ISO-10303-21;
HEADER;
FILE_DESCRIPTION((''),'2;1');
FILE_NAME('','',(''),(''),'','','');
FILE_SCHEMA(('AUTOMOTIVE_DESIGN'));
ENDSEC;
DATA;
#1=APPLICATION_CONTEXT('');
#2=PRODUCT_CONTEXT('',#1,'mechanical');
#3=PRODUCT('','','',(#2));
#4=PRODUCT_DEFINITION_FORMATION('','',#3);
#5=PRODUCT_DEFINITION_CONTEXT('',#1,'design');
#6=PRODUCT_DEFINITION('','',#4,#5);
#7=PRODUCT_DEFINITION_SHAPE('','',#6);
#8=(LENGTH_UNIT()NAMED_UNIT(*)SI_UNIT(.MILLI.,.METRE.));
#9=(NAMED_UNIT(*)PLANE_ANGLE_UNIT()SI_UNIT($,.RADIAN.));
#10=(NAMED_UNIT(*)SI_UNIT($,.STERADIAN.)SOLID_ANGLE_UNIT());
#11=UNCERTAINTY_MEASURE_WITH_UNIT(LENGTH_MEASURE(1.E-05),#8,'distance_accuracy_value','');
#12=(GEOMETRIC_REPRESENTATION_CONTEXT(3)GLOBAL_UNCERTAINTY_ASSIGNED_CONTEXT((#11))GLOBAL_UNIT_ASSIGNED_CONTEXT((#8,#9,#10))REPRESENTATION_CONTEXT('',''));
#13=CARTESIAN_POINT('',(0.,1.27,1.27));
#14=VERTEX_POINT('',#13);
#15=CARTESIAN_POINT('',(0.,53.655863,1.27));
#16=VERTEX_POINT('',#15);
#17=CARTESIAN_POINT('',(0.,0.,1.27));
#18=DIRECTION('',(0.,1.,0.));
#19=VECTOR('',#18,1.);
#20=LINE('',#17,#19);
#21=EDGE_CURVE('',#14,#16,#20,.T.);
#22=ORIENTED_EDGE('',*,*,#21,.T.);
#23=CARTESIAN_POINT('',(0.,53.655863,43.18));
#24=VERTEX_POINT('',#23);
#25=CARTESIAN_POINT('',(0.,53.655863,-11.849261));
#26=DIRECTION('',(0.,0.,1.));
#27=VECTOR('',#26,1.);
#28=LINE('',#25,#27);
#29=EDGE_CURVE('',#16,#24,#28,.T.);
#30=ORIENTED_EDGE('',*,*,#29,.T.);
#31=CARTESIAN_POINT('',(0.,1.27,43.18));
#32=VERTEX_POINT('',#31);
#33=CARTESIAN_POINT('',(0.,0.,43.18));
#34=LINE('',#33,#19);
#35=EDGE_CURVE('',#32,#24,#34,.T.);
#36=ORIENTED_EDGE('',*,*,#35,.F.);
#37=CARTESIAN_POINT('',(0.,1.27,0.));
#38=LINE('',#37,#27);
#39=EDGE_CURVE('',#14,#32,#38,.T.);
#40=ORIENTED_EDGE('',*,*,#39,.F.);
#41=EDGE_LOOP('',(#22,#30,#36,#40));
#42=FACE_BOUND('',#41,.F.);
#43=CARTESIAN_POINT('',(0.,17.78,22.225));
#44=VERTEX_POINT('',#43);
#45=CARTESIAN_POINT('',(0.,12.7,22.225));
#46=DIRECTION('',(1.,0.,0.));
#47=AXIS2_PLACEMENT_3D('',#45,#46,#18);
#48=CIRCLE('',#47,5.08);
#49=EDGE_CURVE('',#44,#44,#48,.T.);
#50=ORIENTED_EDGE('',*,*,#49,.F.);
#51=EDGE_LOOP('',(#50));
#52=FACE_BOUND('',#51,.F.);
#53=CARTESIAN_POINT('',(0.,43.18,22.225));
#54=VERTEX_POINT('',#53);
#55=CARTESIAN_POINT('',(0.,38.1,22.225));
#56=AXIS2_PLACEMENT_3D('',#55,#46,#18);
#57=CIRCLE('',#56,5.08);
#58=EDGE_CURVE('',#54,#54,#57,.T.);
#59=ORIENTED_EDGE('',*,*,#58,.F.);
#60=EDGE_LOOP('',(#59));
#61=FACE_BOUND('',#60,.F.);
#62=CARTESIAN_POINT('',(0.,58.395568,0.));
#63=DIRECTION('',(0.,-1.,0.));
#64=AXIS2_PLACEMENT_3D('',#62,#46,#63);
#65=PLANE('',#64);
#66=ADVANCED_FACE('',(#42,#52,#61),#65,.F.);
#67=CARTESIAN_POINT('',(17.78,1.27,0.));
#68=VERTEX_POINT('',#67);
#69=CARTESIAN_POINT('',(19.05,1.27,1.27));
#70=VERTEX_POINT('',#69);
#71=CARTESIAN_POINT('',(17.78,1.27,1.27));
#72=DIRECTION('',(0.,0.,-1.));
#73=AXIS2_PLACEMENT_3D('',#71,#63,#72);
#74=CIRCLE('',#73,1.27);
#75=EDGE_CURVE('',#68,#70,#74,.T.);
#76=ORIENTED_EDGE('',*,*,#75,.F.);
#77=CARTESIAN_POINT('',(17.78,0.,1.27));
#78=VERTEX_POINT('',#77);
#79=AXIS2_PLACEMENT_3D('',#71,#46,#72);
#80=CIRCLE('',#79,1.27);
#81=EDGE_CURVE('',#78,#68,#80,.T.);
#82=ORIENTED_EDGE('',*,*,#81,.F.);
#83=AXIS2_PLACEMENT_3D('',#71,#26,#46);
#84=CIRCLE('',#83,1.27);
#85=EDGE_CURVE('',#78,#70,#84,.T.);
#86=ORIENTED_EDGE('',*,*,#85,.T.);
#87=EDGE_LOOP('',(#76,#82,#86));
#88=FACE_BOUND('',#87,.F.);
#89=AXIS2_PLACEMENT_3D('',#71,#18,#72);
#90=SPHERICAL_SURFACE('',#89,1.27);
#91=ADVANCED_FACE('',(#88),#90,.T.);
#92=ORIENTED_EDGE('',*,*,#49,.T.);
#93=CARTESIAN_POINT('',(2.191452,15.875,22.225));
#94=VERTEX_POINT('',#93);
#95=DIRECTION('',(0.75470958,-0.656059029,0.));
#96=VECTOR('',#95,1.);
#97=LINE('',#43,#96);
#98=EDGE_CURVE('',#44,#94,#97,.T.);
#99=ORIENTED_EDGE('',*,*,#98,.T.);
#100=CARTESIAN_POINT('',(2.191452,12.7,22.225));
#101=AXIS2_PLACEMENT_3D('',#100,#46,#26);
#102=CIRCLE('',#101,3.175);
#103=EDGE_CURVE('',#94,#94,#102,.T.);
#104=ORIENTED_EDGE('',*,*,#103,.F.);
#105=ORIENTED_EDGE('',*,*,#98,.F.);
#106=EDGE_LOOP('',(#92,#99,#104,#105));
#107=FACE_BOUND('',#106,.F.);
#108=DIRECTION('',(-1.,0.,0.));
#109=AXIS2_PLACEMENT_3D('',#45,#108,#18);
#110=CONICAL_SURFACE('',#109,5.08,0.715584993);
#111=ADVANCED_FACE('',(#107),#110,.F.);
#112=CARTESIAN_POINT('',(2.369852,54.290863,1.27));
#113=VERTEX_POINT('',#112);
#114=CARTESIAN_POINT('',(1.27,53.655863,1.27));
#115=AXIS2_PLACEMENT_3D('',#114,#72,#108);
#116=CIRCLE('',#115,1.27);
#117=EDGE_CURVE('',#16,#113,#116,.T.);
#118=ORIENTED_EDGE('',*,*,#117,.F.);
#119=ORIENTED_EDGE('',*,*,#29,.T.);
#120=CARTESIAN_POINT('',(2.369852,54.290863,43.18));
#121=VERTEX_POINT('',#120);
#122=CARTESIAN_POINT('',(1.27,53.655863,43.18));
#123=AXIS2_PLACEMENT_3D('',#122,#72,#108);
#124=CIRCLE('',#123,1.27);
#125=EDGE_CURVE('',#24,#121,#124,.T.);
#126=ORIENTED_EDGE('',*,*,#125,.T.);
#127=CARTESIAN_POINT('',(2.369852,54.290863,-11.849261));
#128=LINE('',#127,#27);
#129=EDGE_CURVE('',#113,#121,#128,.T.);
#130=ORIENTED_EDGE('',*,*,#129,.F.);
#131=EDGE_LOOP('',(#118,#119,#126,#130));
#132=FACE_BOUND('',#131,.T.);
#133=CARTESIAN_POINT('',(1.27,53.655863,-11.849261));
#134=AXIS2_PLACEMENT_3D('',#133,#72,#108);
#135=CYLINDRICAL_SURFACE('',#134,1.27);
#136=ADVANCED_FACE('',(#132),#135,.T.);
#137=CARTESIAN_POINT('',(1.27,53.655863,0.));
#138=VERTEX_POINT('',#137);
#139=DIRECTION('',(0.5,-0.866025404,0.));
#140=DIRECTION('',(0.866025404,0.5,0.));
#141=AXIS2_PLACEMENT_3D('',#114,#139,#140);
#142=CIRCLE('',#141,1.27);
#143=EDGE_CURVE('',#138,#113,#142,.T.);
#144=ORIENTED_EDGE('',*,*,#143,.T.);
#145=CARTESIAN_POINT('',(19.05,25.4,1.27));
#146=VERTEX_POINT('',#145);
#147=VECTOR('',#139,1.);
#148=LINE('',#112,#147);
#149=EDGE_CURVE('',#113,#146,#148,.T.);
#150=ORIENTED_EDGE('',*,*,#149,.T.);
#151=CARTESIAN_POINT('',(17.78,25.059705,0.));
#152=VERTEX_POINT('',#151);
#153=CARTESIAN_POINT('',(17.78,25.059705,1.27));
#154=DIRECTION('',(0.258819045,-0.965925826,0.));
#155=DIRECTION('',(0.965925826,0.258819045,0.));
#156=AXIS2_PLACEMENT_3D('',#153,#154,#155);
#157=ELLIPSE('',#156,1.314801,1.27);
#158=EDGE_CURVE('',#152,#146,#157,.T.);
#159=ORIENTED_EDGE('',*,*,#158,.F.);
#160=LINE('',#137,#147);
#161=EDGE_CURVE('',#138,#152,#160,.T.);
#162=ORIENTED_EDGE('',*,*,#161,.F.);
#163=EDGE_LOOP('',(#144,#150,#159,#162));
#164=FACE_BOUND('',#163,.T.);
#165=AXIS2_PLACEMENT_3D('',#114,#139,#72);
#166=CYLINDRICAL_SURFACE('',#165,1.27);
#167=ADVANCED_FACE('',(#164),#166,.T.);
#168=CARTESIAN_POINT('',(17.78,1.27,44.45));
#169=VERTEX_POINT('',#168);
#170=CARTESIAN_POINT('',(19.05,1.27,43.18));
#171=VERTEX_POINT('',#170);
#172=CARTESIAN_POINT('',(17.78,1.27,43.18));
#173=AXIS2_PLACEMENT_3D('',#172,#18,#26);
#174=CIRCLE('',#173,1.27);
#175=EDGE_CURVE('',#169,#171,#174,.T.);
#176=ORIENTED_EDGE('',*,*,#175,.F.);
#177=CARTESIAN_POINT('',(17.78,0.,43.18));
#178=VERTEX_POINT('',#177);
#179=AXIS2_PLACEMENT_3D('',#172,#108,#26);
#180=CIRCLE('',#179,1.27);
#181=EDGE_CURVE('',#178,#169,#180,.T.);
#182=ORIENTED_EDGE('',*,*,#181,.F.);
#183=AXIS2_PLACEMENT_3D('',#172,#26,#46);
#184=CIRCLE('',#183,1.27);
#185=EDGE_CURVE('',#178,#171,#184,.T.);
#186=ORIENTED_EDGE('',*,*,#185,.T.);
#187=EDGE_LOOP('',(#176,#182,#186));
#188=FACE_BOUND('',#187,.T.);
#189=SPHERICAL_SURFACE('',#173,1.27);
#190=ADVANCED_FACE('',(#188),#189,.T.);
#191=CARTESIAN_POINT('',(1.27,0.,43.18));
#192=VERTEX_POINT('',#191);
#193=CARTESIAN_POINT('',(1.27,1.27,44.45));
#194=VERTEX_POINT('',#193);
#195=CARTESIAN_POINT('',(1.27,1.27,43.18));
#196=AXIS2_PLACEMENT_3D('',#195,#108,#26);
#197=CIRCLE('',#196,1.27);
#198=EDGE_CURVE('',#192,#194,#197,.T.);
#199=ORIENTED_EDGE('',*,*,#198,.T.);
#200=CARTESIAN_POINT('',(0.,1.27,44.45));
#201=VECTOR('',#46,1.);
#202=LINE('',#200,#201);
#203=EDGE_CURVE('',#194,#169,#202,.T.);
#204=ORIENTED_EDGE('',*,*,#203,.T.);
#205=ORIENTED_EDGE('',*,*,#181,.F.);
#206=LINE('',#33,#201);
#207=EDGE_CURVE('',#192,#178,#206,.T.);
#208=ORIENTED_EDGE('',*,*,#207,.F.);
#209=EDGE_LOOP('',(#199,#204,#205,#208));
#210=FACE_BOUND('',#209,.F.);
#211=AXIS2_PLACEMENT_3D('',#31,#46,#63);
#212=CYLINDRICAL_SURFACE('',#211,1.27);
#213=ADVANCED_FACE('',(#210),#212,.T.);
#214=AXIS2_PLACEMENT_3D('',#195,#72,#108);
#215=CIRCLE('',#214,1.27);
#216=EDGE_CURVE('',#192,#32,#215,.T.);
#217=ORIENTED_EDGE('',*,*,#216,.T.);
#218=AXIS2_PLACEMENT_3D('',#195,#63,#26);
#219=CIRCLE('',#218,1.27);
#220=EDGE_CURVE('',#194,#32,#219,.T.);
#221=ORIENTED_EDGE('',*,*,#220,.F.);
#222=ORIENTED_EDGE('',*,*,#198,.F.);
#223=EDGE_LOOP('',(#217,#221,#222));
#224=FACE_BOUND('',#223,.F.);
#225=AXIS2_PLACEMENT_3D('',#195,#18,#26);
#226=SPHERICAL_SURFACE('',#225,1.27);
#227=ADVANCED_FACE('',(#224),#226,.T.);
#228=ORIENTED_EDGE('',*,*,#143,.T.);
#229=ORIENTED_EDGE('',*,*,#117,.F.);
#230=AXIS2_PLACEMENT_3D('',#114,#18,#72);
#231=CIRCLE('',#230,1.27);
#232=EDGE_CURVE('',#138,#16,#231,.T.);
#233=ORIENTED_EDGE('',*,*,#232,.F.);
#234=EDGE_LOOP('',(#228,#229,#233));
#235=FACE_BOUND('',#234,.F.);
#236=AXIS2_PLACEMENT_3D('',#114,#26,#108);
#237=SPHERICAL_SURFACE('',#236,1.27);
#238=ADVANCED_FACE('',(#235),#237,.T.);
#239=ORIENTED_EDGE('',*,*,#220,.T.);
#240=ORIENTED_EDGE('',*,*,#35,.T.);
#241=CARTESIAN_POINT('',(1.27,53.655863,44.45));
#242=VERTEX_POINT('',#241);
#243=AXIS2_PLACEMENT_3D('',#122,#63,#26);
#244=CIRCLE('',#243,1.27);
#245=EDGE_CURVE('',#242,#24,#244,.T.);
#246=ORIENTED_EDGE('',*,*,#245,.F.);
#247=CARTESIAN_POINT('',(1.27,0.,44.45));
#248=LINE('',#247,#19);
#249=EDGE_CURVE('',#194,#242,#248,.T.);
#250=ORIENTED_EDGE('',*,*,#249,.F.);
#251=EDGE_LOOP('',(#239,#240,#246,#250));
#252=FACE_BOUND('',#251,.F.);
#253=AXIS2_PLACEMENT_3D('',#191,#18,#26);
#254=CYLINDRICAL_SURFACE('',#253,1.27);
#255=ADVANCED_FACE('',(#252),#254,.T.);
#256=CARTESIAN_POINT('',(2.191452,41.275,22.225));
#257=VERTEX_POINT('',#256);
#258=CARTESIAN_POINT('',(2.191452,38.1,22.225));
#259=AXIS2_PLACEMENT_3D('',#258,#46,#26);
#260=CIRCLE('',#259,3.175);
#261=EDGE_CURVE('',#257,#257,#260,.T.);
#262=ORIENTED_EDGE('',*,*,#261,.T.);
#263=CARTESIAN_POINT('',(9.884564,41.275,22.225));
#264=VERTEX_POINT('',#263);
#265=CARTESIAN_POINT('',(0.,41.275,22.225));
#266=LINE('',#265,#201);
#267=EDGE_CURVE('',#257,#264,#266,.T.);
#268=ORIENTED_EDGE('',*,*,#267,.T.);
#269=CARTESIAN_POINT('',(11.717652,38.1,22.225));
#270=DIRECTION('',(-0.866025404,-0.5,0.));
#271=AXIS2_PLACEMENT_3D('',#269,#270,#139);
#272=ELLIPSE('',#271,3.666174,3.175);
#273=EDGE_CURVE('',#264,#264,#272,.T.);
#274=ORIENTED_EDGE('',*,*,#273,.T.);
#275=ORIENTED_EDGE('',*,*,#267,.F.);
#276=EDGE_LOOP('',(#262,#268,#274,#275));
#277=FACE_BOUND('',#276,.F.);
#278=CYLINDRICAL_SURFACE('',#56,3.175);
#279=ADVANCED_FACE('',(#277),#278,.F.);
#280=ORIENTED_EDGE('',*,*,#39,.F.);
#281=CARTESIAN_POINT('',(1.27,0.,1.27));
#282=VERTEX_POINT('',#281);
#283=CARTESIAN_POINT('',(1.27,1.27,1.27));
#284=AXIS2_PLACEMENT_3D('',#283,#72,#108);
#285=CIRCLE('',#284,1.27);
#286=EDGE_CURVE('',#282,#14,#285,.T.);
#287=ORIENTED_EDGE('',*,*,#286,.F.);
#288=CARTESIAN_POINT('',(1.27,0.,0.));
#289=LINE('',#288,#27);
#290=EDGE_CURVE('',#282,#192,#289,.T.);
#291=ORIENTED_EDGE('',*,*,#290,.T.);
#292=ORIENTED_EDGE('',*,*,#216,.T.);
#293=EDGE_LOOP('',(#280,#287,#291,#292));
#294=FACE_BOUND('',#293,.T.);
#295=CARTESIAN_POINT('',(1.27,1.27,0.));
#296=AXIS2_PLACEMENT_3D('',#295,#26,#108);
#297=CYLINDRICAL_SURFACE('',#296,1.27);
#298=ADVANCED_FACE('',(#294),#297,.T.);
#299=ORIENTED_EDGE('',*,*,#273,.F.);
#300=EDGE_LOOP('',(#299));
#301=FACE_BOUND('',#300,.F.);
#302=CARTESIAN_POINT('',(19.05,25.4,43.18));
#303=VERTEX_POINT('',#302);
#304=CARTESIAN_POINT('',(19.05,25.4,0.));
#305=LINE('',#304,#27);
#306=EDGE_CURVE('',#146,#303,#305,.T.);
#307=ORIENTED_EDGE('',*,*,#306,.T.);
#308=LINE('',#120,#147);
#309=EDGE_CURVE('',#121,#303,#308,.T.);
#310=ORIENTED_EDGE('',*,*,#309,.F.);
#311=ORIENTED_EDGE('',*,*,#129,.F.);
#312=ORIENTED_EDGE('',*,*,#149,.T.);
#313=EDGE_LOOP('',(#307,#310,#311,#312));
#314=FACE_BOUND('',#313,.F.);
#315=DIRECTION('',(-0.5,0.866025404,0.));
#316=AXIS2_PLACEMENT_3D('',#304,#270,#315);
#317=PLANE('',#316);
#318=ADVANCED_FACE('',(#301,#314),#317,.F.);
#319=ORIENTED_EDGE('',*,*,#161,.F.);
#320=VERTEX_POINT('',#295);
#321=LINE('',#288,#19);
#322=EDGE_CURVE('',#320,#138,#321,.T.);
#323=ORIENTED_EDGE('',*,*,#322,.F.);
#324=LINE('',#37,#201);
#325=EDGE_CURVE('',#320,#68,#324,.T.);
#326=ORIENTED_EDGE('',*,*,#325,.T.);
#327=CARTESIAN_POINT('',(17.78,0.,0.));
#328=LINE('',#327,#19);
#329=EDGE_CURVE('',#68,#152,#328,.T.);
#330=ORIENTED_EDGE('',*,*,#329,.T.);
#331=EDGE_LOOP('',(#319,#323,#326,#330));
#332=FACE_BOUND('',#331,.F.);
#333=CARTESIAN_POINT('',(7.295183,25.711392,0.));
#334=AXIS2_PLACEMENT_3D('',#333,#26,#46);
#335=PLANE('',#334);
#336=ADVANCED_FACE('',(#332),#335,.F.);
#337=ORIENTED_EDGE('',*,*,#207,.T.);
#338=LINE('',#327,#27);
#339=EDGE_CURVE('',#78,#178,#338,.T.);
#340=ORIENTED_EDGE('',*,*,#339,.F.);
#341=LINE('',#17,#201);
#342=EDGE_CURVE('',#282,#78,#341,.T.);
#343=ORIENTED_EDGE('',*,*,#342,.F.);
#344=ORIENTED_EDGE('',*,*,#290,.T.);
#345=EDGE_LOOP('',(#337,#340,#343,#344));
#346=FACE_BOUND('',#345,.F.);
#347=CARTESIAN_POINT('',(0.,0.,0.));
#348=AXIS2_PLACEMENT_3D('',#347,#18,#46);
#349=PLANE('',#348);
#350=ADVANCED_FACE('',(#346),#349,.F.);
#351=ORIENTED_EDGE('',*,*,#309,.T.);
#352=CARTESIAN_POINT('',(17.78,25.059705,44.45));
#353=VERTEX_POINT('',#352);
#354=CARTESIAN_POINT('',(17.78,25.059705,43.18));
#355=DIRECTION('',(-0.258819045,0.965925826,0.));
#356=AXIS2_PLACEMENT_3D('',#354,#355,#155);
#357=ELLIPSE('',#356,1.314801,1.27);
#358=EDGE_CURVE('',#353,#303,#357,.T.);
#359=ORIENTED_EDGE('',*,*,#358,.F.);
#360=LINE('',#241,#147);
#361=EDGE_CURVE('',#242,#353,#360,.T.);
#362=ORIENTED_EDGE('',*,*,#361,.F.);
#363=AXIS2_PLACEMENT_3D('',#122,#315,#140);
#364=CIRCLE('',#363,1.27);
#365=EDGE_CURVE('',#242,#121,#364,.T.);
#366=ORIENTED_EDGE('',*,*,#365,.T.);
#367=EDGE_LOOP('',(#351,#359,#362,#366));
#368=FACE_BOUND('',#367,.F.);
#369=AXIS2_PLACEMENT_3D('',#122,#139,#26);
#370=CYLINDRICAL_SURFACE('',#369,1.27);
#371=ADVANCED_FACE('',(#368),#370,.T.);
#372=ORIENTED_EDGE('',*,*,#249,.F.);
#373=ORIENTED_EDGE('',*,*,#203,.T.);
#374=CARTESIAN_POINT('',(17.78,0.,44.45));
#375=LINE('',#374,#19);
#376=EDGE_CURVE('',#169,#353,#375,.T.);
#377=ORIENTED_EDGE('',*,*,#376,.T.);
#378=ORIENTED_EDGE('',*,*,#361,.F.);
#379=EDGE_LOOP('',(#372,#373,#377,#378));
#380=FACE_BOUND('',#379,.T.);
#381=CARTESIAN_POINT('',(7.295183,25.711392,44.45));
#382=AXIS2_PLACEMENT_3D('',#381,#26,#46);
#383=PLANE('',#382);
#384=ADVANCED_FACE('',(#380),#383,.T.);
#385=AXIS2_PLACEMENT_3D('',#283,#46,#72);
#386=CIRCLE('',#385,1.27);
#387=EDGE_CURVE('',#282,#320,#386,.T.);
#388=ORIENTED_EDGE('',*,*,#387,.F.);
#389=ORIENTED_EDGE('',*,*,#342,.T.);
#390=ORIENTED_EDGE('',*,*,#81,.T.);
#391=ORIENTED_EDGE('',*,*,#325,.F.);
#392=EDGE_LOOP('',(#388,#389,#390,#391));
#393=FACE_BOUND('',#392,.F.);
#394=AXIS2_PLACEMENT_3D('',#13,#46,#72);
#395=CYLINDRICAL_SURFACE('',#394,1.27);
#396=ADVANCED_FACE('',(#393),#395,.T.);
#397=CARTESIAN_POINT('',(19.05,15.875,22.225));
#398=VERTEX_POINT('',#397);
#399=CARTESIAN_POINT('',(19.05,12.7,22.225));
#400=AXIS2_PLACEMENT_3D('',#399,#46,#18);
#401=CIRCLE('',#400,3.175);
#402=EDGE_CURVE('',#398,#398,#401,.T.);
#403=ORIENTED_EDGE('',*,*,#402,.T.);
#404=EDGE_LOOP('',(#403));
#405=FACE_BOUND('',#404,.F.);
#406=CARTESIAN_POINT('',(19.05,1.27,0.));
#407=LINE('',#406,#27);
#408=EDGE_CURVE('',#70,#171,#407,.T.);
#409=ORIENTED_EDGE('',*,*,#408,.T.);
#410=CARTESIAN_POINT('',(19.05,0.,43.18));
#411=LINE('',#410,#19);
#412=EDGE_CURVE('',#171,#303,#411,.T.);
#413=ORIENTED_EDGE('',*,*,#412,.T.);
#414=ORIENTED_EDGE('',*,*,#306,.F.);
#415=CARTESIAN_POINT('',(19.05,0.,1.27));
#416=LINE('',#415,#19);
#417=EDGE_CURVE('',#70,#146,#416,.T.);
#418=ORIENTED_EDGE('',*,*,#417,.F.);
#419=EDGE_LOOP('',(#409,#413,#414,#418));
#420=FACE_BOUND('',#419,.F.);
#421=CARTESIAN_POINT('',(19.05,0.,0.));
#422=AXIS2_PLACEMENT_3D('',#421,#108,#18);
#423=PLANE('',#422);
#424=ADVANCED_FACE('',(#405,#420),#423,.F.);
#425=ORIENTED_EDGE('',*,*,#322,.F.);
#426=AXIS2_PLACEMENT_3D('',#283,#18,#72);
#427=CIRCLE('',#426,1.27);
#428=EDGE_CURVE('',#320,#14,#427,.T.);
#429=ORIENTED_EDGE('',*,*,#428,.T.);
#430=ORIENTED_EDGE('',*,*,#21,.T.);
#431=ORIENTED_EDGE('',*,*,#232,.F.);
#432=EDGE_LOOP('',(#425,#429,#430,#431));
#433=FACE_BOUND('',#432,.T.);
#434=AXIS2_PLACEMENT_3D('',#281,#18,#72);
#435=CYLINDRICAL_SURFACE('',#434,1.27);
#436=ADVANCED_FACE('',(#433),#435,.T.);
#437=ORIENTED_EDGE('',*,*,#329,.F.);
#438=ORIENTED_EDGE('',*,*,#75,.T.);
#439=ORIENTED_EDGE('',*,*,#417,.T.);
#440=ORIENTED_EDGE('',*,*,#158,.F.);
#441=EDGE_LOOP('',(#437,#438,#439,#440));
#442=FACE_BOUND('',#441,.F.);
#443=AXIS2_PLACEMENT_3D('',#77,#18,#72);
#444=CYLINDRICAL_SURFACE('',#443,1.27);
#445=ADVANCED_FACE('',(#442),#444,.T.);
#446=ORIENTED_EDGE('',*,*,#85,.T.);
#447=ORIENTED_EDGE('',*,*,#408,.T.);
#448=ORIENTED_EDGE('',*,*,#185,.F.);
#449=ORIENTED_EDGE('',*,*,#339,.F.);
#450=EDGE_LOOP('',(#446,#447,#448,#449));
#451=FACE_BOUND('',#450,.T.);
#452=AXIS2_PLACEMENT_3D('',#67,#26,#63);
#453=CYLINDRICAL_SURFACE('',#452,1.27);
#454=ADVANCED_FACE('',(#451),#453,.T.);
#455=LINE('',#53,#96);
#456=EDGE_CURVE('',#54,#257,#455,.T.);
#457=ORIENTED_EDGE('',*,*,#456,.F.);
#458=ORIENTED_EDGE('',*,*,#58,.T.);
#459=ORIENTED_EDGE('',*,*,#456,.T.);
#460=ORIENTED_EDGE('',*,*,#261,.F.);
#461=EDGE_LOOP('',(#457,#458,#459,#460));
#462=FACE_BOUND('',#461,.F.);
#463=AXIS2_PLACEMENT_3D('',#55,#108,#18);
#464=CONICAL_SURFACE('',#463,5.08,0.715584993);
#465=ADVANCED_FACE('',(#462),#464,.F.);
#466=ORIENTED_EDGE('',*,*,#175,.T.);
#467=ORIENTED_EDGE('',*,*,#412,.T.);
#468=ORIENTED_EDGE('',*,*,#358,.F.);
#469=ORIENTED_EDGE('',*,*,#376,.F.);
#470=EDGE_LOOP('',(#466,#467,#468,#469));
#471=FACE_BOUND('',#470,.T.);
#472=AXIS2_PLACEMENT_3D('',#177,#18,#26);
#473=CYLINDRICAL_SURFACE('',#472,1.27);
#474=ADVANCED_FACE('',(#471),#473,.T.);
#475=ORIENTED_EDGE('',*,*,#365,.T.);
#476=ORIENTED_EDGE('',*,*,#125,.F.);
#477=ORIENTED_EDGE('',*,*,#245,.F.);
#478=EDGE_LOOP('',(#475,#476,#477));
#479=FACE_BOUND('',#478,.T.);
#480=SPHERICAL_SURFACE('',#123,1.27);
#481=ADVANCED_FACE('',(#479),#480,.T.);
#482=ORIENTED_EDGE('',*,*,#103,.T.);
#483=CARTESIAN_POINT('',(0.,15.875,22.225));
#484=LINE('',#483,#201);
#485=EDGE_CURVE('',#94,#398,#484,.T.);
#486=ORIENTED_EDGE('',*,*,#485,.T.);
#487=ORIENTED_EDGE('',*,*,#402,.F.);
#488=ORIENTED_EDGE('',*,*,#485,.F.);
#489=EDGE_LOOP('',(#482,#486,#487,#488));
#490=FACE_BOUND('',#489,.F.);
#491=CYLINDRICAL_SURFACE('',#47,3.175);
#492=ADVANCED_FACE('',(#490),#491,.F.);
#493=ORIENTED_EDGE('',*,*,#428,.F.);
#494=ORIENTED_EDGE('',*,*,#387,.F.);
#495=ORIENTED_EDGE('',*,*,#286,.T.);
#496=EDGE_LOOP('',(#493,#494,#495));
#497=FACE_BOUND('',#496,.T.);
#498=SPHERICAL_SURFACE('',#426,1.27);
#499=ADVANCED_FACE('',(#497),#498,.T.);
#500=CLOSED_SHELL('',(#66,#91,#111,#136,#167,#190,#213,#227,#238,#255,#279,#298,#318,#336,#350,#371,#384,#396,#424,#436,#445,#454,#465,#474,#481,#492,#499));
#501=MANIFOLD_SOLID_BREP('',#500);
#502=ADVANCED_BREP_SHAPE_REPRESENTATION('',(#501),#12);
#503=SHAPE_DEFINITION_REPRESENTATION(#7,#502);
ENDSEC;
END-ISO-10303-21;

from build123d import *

# Parameters (mm, degrees)
F1_DEPTH       = 44.45
F3_D           = 6.35
F3_CSINK_D     = 10.16
F3_CSINK_ANGLE = 82
F4_T1_DEPTH    = 68.1485226281
F5_R           = 1.27


# Not quite as in the source:
# - a fillet or chamfer that OpenCascade refuses, or shapes differently, is made with other operations: its cross-section is extruded or revolved along the edge and cut away or added
# - a feature names something its author has since deleted; it is built from what else it names


with BuildPart() as f1:
    # F0 (on Top) → F1 (new body)
    with BuildSketch(Plane.XY):
        Polygon((0, 58.3955678842), (0, 0), (19.05, 0), (19.05, 25.4), align=None)
    extrude(amount=F1_DEPTH)

    # F3 (through all)
    with Locations(Plane(origin=(0, 0, 0), x_dir=(0, -1, 0), z_dir=(-1, 0, 0))):
        with Locations((-12.7, 22.225), (-38.1, 22.225)):
            CounterSinkHole(F3_D / 2, F3_CSINK_D / 2, counter_sink_angle=F3_CSINK_ANGLE)

    # F4: fillet of radius 1.27 on 1 edges, made by hand

    # F4_s2 → F4_t1 (cut)
    with BuildSketch(Plane.XY.offset(-11.849261314)):
        with BuildLine():
            ThreePointArc((0, 53.6558633586), (0.9412998127, 54.882589158), (2.3698522628, 54.2908633586))
            Line((2.3698522628, 54.2908633586), (0, 58.3955678842))
            Line((0, 58.3955678842), (0, 53.6558633586))
        make_face()
    extrude(amount=F4_T1_DEPTH, mode=Mode.SUBTRACT)

    # F5
    f5_edges = [f1.edges().sort_by_distance(p)[0] for p in [
        (0.9413, 54.882589, 44.45),
        (10.709926, 39.845432, 44.45),
        (19.05, 12.7, 44.45),
        (9.525, 0, 44.45),
        (0, 26.827932, 44.45),
        (0.9413, 54.882589, 0),
        (10.709926, 39.845432, 0),
        (19.05, 12.7, 0),
        (9.525, 0, 0),
        (0, 26.827932, 0),
        (0, 0, 22.225),
        (19.05, 0, 22.225),
    ]]
    fillet(f5_edges, radius=F5_R)


solid = f1.part
